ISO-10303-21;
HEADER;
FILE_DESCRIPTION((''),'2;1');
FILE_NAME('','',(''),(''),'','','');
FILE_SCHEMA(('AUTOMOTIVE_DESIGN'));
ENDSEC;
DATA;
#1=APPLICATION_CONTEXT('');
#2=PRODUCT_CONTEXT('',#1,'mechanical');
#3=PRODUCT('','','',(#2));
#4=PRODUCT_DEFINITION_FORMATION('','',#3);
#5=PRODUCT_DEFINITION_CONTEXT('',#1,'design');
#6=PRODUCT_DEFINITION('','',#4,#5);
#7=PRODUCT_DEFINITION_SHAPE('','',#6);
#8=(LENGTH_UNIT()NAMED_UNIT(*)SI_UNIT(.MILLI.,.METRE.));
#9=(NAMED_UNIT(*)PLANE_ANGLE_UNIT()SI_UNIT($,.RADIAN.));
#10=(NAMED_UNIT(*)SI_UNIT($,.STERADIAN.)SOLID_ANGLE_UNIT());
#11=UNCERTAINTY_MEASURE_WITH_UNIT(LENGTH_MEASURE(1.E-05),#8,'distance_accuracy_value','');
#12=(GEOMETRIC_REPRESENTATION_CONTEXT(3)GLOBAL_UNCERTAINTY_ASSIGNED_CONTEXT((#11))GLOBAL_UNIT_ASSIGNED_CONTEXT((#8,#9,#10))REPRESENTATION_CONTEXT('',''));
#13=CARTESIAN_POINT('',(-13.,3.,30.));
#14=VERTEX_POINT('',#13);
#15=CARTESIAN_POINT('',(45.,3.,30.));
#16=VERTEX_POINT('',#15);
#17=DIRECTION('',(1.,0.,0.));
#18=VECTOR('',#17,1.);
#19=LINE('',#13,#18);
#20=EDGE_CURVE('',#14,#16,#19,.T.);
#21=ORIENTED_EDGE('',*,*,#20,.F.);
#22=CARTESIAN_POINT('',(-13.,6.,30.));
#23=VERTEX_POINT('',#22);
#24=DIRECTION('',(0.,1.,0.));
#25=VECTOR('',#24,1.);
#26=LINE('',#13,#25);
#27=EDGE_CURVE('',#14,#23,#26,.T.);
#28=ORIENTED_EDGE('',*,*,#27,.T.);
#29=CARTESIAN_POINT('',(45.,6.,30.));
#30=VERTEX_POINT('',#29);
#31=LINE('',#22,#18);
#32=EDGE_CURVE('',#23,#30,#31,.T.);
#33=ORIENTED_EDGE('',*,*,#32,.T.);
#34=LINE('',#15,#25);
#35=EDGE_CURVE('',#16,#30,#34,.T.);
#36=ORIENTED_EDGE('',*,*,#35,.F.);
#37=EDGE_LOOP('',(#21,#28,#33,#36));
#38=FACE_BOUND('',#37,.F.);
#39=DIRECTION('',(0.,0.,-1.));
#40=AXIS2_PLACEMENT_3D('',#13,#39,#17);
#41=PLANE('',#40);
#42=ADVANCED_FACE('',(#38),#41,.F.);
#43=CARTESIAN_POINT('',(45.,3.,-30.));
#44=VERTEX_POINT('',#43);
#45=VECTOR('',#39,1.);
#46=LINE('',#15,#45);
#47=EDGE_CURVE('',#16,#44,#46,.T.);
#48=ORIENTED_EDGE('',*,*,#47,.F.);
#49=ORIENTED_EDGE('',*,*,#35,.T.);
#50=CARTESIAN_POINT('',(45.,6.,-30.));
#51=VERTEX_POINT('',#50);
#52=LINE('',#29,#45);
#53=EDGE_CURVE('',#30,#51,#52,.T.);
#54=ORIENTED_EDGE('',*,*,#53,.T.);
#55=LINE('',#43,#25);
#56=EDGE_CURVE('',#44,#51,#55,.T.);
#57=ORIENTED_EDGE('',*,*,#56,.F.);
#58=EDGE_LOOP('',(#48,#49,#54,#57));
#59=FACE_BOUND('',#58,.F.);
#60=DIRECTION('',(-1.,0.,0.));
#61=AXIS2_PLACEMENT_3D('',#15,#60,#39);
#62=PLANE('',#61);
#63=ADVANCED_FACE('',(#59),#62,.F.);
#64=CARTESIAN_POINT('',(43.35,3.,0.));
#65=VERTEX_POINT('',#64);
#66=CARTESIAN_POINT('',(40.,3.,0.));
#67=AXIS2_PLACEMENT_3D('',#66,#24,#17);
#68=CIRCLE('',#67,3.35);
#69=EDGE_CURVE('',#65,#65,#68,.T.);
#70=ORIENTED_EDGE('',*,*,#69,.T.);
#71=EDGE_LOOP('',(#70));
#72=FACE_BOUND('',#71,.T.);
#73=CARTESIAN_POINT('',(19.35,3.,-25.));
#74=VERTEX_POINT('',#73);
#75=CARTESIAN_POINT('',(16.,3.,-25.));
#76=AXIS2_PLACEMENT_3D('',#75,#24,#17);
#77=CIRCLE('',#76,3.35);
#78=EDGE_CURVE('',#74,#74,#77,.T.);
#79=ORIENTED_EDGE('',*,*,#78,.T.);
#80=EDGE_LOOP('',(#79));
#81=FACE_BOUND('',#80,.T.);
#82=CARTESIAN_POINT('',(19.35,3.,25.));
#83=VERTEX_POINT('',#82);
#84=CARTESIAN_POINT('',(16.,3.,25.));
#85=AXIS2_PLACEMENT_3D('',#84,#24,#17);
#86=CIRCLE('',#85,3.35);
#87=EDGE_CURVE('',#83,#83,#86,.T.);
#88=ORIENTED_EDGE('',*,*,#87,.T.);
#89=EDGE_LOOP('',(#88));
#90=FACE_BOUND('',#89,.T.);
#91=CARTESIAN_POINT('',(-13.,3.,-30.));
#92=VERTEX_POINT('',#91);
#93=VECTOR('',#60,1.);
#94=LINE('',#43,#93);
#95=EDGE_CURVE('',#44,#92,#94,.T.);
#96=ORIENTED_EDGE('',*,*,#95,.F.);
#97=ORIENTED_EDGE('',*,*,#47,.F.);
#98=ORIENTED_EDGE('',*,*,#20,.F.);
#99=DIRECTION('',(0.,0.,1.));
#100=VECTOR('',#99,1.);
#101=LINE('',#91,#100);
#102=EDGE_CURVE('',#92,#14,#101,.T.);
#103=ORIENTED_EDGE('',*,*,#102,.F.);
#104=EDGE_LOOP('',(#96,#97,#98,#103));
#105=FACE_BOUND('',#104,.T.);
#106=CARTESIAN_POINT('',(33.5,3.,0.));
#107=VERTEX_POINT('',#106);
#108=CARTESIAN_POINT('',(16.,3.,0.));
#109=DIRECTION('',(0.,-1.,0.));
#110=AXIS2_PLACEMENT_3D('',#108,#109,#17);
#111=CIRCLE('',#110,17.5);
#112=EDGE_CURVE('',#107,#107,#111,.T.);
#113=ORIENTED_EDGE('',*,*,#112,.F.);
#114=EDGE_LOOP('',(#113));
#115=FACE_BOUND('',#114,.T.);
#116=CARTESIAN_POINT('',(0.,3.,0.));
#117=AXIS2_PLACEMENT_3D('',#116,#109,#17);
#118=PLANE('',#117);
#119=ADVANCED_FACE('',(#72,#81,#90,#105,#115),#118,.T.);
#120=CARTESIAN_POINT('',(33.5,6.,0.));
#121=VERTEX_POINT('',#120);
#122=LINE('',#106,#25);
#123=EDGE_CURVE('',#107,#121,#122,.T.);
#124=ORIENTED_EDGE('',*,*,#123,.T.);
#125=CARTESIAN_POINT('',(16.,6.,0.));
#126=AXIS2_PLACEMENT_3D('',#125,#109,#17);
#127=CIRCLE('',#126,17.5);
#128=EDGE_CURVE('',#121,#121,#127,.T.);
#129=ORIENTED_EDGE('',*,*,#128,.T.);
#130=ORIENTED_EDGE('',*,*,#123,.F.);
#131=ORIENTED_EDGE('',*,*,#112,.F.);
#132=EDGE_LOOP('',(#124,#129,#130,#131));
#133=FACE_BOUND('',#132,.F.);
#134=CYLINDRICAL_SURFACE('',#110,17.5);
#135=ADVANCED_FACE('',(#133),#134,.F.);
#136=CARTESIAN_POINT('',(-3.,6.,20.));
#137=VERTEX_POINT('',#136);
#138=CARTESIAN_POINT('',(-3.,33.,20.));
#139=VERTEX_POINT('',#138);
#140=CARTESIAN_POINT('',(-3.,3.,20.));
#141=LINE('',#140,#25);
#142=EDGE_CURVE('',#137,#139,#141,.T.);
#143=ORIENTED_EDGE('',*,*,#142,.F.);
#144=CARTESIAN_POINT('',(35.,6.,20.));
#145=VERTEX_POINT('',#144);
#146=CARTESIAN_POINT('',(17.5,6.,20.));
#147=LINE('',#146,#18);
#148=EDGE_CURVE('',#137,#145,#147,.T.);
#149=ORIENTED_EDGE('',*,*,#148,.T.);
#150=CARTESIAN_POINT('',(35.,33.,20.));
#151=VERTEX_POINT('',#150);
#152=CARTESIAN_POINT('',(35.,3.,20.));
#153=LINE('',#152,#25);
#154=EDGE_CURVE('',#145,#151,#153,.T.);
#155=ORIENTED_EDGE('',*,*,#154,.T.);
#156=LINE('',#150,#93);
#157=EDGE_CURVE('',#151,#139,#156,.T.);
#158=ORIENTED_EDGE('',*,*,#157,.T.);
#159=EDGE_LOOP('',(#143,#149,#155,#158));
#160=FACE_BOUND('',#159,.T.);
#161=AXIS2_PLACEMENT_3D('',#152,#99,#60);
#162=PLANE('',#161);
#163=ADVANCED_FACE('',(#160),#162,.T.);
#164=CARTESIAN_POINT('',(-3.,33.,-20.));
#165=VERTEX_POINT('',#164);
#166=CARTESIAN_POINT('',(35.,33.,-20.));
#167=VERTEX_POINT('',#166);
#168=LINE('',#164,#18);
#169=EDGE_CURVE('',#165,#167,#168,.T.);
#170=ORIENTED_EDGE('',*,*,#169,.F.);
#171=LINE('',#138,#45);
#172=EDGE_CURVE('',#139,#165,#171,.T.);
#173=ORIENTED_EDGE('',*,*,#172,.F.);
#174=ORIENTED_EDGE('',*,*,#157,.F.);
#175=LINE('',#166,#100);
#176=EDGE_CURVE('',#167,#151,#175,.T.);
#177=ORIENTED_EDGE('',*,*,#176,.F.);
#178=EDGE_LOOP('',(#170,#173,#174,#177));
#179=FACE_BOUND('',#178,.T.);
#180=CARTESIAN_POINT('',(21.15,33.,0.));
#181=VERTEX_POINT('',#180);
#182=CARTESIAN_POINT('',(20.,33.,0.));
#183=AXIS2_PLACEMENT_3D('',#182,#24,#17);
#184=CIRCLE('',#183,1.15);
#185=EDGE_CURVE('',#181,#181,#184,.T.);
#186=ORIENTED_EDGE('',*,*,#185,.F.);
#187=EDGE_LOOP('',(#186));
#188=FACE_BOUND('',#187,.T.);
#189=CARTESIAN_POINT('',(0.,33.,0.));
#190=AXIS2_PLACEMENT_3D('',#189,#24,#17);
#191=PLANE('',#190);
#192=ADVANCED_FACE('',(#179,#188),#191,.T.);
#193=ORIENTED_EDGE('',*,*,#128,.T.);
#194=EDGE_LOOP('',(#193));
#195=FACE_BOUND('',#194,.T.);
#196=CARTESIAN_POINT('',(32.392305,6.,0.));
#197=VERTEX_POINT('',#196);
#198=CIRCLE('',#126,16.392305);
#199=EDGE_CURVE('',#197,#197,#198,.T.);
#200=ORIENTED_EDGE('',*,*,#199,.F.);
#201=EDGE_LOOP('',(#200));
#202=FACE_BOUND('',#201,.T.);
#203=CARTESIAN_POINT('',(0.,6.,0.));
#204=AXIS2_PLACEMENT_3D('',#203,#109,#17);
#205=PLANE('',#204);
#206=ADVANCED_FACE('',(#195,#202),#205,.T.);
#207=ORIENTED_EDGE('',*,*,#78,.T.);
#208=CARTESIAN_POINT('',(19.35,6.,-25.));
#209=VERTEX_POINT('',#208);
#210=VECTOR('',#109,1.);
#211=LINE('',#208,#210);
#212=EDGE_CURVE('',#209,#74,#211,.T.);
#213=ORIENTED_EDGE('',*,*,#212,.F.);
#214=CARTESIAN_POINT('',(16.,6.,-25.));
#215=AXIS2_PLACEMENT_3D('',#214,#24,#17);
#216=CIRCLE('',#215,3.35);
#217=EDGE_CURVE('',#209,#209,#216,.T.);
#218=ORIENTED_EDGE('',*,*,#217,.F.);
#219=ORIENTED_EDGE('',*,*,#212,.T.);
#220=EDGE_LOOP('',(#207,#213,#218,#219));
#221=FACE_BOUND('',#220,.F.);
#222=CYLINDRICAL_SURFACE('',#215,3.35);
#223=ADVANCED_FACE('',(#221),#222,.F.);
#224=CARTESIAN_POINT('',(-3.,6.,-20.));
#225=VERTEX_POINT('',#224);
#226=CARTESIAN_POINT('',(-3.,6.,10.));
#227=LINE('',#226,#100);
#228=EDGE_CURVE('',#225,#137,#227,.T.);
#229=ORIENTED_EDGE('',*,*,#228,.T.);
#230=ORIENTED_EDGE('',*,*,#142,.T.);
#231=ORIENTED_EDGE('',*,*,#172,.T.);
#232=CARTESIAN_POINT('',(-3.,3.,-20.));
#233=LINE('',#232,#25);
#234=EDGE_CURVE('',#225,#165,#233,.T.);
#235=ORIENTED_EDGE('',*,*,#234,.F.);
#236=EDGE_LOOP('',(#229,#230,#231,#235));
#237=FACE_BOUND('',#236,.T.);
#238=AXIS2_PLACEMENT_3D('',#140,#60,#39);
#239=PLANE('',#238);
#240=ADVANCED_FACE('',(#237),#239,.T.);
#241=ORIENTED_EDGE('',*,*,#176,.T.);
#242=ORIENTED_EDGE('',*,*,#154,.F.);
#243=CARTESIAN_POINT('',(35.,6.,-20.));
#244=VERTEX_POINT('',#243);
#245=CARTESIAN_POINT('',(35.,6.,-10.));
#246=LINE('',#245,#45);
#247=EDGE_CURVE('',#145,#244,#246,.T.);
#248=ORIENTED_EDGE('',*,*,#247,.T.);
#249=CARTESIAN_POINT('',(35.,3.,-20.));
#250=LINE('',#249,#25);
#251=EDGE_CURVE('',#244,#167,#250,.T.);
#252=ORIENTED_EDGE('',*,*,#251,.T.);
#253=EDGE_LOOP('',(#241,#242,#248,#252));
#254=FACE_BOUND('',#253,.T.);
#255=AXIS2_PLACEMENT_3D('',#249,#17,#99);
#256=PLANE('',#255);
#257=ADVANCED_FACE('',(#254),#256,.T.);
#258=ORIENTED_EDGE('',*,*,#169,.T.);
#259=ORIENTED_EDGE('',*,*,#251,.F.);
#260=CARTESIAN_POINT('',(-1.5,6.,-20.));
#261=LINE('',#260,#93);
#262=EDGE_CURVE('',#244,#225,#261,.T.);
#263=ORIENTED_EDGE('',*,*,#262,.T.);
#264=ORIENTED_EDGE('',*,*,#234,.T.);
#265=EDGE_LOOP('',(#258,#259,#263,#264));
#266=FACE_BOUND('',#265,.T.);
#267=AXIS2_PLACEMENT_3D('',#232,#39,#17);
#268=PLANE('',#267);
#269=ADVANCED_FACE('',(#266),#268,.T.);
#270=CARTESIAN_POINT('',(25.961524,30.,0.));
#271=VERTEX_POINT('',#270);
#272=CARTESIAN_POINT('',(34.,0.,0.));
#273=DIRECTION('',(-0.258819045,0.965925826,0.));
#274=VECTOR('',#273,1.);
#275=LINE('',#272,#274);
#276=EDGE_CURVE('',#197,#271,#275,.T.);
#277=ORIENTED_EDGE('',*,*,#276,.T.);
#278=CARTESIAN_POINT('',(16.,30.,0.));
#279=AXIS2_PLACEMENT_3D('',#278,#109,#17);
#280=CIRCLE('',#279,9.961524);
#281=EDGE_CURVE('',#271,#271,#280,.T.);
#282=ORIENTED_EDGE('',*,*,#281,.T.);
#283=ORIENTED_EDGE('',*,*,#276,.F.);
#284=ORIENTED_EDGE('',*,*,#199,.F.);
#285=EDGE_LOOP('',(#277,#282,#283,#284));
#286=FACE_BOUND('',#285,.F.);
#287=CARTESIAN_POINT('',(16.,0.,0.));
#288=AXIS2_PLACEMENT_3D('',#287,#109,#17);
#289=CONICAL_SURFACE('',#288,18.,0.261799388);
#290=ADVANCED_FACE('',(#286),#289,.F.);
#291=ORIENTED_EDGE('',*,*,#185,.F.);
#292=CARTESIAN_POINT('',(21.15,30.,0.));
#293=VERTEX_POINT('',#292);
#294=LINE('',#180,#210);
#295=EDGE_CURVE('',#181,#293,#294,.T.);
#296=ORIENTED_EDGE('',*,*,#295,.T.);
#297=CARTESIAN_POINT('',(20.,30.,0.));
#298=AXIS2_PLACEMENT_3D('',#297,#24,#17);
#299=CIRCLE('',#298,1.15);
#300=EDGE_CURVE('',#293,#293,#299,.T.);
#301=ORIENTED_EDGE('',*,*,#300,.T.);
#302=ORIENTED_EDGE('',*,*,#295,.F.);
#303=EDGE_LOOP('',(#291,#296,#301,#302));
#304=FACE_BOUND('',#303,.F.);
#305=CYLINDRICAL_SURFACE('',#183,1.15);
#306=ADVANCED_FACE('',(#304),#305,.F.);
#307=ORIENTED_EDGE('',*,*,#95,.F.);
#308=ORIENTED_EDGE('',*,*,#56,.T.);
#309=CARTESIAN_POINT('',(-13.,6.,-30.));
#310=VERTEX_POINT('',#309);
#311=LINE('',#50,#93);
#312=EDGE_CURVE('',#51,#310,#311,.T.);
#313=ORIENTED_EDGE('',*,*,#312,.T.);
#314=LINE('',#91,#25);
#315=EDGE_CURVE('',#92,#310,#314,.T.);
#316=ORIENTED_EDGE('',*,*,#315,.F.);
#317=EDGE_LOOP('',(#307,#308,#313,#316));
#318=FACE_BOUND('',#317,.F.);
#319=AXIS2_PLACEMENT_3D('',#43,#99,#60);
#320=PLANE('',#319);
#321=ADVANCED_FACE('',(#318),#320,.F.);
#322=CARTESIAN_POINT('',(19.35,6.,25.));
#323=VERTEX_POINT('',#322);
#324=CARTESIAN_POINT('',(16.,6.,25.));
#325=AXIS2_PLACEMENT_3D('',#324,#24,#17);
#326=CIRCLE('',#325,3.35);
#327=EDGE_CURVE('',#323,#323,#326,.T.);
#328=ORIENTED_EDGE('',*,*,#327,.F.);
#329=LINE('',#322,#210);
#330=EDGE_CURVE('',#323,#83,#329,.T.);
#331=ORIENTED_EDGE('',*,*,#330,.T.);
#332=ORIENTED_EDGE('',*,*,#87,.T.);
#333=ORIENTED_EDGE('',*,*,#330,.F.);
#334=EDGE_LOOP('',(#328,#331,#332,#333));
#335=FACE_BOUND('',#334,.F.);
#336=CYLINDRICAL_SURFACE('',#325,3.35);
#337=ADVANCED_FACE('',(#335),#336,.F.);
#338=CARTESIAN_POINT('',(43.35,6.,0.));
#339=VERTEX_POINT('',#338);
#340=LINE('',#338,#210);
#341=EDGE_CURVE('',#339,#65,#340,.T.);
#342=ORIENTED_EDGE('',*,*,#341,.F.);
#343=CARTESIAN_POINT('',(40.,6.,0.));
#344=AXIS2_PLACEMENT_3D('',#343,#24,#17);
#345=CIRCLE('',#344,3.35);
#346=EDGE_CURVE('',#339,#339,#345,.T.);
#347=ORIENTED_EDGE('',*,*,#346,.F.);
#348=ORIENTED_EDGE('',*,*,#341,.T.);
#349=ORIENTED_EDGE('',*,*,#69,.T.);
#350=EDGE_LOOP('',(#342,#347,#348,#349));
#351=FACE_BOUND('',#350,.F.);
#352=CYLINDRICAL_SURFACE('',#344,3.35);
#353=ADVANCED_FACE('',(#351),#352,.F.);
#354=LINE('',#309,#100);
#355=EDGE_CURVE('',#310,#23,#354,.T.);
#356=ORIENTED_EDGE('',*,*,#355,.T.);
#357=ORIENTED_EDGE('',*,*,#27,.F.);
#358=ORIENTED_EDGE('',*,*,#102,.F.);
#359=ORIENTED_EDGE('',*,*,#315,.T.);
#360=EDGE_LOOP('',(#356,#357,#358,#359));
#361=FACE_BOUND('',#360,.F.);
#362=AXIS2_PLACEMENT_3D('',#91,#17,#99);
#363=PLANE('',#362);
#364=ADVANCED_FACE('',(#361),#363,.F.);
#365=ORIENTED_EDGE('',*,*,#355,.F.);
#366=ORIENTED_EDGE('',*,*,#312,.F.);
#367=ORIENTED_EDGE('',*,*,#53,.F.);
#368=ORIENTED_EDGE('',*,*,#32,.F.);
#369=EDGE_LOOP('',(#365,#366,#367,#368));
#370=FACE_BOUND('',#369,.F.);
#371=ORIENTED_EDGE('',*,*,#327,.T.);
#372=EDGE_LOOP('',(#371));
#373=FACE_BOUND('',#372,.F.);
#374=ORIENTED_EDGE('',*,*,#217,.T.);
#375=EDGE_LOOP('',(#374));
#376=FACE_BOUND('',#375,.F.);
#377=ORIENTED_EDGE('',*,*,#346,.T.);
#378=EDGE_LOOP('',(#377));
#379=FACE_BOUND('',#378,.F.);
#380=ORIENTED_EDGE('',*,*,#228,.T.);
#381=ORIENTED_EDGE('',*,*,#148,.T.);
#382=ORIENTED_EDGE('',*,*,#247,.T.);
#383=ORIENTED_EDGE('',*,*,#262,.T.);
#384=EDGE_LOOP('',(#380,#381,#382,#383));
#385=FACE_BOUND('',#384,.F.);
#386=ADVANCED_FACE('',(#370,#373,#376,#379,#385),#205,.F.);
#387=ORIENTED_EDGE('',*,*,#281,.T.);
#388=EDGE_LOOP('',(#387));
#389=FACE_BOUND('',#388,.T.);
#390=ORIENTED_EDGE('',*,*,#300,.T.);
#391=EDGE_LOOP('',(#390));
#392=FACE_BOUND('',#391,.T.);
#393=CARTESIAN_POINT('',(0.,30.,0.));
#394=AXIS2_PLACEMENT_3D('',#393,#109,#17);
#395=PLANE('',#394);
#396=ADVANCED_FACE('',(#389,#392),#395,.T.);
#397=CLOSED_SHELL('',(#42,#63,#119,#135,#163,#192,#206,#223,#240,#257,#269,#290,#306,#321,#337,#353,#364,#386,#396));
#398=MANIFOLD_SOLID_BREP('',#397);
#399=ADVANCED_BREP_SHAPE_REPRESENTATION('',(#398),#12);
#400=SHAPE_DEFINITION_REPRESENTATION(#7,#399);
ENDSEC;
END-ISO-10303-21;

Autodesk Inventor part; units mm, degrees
ref_plane "YZ Plane" through (0, 0, 0) normal (1, 0, 0) x (0, 1, 0)
ref_plane "XZ Plane" through (0, 0, 0) normal (0, 1, 0) x (-1, 0, 0)
ref_plane "XY Plane" through (0, 0, 0) normal (0, 0, 1) x (1, 0, 0)
ref_plane "Work Plane5" through (0, 3, 0) normal (0, 1, 0) x (1, 0, 0)
sketch "Sketch45" plane through (0, 3, 0) normal (0, 1, 0) x (1, 0, 0)
  line L0 (35, -20) -> (-3, -20)
  line L1 (-3, -20) -> (-3, 20)
  line L2 (-3, 20) -> (35, 20)
  line L3 (35, 20) -> (35, -20)
  point P0 (0, 0)
  dimension "d142" = 38
  dimension "d143" = 40
extrude "Extrusion34" add sketch "Sketch45" along normal blind 30
ref_plane "Work Plane2" through (0, 0, 0) normal (0, -1, 0) x (1, 0, 0)
sketch "Sketch47" plane through (0, 0, 0) normal (0, -1, 0) x (1, 0, 0)
  circle A0 centre (16, 0) radius 18
  point P0 (0, 0)
  dimension "d146" = 36
extrude "Extrusion35" cut sketch "Sketch47" against normal blind 30 draft -15
ref_plane "Work Plane1" through (0, 3, 0) normal (0, 1, 0) x (1, 0, 0)
sketch "Sketch74" plane through (0, 33, 0) normal (0, 1, 0) x (1, 0, 0)
  circle A0 centre (20, 0) radius 1.15
  point P0 (0, 0)
  dimension "d210" = 2.3
extrude "Extrusion51" cut sketch "Sketch74" against normal blind 10
sketch "Sketch77" plane through (0, 3, 0) normal (0, -1, 0) x (1, 0, 0)
  circle A0 centre (16, 0) radius 17.5
  point P0 (0, 0)
  dimension "d219" = 35
sketch "Sketch78" plane through (0, 3, 0) normal (0, -1, 0) x (1, 0, 0)
  line L0 (45, -30) -> (-13, -30)
  line L1 (-13, -30) -> (-13, 30)
  line L2 (-13, 30) -> (45, 30)
  line L3 (45, 30) -> (45, -30)
  line L4 (45, -30) -> (-13, 30) construction
  line L5 (-13, -30) -> (45, 30) construction
  point P0 (0, 0)
  point P1 (16, 0)
  dimension "d220" = 58
  dimension "d221" = 60
extrude "Extrusion53" add sketch "Sketch78" against normal blind 3
extrude "Extrusion54" cut sketch "Sketch77" against normal blind 3
sketch "Sketch79" plane through (0, 6, 0) normal (0, 1, 0) x (1, 0, 0)
  circle A0 centre (16, -25) radius 3.35
  circle A1 centre (16, 25) radius 3.35
  circle A2 centre (40, 0) radius 3.35
  point P0 (0, 0)
  dimension "d226" = 6.7
  dimension "d227" = 6.7
  dimension "d228" = 6.7
extrude "Extrusion55" cut sketch "Sketch79" against normal through all
properties part number "liquid_port_v01"
